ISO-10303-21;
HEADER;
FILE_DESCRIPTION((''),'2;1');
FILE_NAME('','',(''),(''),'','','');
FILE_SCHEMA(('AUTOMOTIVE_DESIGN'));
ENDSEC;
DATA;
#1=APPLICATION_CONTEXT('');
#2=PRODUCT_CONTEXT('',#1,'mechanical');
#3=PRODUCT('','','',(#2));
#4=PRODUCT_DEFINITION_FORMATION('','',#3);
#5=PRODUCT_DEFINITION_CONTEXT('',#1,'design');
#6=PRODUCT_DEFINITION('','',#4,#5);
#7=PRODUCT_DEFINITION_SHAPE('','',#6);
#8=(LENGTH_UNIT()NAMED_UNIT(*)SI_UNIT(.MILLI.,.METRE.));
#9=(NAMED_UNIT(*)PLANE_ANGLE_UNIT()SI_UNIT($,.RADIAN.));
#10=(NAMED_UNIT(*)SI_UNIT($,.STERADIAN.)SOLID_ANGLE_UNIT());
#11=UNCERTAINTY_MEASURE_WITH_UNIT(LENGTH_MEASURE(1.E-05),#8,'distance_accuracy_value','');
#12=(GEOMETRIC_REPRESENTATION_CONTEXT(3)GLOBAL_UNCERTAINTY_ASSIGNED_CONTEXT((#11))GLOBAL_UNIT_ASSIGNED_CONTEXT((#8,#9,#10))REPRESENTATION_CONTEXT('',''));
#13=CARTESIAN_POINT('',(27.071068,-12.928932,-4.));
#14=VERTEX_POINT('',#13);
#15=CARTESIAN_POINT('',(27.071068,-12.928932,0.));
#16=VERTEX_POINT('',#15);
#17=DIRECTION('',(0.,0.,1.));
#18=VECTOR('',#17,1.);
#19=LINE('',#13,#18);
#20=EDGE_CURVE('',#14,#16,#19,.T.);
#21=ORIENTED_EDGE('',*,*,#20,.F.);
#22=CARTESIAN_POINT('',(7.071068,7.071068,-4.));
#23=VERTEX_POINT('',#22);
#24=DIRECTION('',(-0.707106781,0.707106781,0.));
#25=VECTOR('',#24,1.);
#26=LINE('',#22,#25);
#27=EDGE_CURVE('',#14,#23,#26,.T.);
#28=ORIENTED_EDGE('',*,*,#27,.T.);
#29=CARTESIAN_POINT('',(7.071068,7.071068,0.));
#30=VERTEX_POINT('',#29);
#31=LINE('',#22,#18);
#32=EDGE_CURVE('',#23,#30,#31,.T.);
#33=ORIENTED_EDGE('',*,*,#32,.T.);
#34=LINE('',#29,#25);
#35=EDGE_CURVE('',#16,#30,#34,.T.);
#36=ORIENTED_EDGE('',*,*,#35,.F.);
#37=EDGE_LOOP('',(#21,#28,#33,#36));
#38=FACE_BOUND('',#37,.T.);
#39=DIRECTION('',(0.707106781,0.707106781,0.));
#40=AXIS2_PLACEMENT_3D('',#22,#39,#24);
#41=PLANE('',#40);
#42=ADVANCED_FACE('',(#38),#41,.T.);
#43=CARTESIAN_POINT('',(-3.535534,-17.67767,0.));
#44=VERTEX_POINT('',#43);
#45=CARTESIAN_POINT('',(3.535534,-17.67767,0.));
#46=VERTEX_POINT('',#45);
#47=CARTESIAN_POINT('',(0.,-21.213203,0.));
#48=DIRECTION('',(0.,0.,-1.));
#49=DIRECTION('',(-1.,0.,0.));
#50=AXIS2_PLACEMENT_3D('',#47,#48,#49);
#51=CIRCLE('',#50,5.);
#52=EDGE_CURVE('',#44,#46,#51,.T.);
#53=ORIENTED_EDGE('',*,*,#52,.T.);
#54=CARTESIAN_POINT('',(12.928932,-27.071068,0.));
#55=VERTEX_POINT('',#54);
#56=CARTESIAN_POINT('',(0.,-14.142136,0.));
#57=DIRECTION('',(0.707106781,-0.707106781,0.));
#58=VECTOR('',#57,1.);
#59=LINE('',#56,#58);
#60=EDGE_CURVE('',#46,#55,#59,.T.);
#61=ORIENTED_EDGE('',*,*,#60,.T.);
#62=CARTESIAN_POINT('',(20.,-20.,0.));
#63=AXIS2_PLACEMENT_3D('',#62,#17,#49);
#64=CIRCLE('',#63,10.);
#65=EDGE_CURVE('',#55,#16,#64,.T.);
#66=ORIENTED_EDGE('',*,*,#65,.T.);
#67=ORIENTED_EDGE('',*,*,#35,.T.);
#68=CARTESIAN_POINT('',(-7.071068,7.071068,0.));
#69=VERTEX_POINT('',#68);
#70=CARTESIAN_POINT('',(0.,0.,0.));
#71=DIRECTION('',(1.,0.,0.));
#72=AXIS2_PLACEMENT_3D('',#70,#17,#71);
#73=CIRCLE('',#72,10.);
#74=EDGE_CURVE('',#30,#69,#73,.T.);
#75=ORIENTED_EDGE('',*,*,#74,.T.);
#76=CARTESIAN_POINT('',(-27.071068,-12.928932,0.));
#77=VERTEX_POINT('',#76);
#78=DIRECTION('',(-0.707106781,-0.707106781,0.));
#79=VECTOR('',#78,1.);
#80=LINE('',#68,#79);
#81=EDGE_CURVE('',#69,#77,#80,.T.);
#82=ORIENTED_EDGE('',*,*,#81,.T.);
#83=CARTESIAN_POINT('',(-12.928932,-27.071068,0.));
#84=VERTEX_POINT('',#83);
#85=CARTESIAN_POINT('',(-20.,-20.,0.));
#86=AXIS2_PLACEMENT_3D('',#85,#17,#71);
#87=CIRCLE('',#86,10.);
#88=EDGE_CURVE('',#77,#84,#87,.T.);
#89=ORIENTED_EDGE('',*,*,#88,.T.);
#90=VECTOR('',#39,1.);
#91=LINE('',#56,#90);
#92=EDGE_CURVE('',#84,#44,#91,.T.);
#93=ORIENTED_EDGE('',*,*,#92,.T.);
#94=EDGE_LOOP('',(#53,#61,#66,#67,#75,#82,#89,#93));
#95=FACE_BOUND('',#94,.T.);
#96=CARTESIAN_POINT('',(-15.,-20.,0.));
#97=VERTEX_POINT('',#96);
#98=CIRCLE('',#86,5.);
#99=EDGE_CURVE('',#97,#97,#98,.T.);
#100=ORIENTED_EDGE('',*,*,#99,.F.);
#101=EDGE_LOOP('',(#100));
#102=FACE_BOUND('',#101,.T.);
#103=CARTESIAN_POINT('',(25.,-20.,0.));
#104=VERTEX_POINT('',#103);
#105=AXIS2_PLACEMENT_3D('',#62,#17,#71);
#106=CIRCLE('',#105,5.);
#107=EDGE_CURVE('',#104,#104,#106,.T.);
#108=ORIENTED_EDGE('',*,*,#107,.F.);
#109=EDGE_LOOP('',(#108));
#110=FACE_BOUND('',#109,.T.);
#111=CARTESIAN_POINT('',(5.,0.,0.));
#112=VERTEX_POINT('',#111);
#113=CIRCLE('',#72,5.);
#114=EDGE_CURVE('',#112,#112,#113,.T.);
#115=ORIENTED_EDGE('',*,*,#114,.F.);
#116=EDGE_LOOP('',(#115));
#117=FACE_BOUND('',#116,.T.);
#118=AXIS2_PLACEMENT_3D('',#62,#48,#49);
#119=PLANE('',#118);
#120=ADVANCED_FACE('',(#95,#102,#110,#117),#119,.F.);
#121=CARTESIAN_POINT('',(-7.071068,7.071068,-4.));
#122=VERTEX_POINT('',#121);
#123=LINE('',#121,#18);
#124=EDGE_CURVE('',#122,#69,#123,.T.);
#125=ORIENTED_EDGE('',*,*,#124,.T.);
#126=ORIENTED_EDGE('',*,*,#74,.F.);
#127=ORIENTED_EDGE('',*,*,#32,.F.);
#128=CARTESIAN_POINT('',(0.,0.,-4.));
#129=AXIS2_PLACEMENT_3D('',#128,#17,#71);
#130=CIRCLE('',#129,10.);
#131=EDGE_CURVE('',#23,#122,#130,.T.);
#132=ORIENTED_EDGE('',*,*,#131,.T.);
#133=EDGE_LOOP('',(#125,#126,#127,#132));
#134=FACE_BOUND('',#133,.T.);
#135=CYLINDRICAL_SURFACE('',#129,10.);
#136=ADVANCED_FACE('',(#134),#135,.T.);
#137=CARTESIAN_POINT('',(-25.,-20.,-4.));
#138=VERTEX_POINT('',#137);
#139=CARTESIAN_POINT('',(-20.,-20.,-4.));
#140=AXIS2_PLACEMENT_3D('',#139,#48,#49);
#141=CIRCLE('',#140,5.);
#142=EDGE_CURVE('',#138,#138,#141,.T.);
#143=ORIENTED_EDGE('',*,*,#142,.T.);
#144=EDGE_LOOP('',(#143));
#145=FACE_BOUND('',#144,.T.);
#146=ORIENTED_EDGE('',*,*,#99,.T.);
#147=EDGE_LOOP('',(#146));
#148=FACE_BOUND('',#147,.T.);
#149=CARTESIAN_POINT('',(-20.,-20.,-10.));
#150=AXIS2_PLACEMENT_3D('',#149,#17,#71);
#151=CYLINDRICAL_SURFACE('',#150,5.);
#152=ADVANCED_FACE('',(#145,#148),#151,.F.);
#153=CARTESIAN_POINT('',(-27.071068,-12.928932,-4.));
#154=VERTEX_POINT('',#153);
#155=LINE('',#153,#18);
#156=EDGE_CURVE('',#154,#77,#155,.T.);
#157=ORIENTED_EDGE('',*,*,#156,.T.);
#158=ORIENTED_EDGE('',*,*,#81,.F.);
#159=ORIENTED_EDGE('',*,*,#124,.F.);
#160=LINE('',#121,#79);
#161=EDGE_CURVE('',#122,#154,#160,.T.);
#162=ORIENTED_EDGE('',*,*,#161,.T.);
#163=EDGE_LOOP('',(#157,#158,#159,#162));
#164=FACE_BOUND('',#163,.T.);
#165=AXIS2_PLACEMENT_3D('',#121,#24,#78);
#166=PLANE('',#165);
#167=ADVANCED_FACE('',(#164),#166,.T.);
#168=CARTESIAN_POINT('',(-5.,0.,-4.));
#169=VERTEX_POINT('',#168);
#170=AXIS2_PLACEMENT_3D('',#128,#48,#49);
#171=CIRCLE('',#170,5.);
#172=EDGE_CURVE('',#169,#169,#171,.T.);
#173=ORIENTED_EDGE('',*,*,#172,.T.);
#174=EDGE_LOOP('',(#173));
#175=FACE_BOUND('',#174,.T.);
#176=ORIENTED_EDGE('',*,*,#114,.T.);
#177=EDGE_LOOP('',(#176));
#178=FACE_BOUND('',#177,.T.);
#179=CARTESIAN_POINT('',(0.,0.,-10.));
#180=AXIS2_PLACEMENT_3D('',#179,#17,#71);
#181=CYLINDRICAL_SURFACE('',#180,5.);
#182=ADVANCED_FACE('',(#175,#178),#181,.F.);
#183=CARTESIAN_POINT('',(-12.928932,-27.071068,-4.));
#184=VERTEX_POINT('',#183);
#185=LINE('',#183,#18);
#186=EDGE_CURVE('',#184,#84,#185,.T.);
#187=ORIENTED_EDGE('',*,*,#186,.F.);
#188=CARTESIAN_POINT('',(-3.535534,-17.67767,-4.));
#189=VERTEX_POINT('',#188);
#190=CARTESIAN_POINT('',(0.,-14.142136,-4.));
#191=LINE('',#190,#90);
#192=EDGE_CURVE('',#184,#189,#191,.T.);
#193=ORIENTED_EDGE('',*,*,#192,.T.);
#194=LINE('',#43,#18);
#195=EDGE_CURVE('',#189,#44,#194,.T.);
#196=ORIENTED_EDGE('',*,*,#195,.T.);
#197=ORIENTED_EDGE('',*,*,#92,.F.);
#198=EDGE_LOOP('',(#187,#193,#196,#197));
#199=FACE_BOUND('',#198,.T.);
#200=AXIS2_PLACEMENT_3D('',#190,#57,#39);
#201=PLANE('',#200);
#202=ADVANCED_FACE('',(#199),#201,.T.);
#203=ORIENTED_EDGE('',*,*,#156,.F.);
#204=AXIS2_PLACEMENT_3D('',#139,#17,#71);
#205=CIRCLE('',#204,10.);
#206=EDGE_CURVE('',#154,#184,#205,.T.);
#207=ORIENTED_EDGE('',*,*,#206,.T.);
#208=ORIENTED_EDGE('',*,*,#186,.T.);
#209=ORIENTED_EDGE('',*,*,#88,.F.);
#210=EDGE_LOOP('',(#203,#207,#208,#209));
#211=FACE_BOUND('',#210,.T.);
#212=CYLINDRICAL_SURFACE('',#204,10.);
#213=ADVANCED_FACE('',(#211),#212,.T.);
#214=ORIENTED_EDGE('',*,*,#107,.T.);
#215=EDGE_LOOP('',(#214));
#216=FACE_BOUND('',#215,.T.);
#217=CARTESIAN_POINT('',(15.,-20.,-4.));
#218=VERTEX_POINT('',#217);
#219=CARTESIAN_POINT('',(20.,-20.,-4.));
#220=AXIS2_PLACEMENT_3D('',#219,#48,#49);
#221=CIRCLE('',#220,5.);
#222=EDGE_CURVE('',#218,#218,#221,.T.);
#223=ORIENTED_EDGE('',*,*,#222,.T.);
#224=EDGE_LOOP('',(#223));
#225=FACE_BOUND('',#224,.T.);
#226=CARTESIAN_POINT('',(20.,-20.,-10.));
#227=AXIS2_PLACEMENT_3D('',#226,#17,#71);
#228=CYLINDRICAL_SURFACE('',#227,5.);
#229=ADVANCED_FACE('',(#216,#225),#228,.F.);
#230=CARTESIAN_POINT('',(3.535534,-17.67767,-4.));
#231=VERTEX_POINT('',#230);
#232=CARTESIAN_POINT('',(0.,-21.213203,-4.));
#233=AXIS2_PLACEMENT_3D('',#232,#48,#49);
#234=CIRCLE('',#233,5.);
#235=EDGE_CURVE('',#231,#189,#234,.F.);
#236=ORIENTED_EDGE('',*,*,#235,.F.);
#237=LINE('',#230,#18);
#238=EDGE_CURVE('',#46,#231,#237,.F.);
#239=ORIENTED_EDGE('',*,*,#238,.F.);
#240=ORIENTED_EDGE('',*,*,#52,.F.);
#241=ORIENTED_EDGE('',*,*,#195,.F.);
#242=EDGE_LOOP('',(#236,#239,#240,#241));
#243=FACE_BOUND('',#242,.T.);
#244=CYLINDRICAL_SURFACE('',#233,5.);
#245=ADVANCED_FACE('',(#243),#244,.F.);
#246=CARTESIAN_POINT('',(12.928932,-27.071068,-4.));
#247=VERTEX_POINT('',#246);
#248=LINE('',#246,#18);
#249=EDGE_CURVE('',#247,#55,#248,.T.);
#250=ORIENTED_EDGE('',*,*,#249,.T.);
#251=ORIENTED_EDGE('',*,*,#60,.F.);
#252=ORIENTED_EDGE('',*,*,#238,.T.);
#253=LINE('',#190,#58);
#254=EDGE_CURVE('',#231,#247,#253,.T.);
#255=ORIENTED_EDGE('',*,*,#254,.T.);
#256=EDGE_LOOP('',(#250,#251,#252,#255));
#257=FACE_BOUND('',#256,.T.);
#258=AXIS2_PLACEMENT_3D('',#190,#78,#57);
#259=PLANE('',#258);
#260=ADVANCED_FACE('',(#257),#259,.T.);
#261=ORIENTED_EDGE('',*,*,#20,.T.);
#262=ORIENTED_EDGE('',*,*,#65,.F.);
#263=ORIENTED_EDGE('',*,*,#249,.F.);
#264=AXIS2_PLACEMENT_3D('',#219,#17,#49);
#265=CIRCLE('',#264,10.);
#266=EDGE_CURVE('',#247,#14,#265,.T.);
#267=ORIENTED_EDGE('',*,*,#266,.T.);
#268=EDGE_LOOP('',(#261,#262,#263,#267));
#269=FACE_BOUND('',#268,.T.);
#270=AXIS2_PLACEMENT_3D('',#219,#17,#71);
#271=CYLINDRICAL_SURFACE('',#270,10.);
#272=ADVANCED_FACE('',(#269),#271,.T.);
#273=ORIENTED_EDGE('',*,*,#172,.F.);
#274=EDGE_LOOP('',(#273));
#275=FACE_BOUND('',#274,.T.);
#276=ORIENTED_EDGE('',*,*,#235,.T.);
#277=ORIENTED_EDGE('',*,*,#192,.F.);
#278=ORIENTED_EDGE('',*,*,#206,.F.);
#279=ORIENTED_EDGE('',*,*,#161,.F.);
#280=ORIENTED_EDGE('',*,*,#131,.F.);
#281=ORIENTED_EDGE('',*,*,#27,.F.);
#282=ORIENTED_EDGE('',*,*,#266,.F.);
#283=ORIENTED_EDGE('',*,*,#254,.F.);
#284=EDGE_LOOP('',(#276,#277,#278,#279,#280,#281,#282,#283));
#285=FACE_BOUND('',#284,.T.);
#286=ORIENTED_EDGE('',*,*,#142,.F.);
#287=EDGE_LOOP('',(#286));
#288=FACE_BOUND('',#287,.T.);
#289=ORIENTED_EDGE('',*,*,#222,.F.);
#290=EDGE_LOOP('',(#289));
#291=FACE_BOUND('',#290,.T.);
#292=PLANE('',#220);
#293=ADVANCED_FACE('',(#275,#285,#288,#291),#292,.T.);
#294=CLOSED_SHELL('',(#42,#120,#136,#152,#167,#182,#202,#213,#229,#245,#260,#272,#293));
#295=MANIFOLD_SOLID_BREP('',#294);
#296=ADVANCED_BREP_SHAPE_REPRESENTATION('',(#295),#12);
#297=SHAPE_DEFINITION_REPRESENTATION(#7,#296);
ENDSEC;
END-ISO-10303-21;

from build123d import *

# Parameters (mm, degrees)
SM_BASE_FLANGE_1_DEPTH = 4
SKETCH_6_R             = 5
CUT_EXTRUDE_1_DEPTH    = 10
FILLET_1_R             = 5


# Sheet-metal steps are written as plain solids
with BuildPart() as part:
    # Sketch 1 → 基体-法兰1 (new body)
    with BuildSketch(Plane.XY):
        with BuildLine():
            Line((-7.071067812, 7.071067812), (-27.071067812, -12.928932188))
            ThreePointArc((-27.071067812, -12.928932188), (-27.071067812, -27.071067812), (-12.928932188, -27.071067812))
            Line((-12.928932188, -27.071067812), (0, -14.142135624))
            Line((0, -14.142135624), (12.928932188, -27.071067812))
            ThreePointArc((12.928932188, -27.071067812), (27.071067812, -27.071067812), (27.071067812, -12.928932188))
            Line((27.071067812, -12.928932188), (7.071067812, 7.071067812))
            ThreePointArc((7.071067812, 7.071067812), (0, 10), (-7.071067812, 7.071067812))
        make_face()
    extrude(amount=-SM_BASE_FLANGE_1_DEPTH)

    # 草图6 → 切除-拉伸1 (cut)
    with BuildSketch(Plane.XY):
        Circle(SKETCH_6_R)
        with Locations((-20, -20)):
            Circle(SKETCH_6_R)
        with Locations((20, -20)):
            Circle(SKETCH_6_R)
    extrude(amount=-CUT_EXTRUDE_1_DEPTH, mode=Mode.SUBTRACT)

    # 圆角1
    fillet_1_edges = [part.edges().sort_by_distance(p)[0] for p in [
        (0, -14.142135624, -2),
    ]]
    fillet(fillet_1_edges, radius=FILLET_1_R)


solid = part.part
